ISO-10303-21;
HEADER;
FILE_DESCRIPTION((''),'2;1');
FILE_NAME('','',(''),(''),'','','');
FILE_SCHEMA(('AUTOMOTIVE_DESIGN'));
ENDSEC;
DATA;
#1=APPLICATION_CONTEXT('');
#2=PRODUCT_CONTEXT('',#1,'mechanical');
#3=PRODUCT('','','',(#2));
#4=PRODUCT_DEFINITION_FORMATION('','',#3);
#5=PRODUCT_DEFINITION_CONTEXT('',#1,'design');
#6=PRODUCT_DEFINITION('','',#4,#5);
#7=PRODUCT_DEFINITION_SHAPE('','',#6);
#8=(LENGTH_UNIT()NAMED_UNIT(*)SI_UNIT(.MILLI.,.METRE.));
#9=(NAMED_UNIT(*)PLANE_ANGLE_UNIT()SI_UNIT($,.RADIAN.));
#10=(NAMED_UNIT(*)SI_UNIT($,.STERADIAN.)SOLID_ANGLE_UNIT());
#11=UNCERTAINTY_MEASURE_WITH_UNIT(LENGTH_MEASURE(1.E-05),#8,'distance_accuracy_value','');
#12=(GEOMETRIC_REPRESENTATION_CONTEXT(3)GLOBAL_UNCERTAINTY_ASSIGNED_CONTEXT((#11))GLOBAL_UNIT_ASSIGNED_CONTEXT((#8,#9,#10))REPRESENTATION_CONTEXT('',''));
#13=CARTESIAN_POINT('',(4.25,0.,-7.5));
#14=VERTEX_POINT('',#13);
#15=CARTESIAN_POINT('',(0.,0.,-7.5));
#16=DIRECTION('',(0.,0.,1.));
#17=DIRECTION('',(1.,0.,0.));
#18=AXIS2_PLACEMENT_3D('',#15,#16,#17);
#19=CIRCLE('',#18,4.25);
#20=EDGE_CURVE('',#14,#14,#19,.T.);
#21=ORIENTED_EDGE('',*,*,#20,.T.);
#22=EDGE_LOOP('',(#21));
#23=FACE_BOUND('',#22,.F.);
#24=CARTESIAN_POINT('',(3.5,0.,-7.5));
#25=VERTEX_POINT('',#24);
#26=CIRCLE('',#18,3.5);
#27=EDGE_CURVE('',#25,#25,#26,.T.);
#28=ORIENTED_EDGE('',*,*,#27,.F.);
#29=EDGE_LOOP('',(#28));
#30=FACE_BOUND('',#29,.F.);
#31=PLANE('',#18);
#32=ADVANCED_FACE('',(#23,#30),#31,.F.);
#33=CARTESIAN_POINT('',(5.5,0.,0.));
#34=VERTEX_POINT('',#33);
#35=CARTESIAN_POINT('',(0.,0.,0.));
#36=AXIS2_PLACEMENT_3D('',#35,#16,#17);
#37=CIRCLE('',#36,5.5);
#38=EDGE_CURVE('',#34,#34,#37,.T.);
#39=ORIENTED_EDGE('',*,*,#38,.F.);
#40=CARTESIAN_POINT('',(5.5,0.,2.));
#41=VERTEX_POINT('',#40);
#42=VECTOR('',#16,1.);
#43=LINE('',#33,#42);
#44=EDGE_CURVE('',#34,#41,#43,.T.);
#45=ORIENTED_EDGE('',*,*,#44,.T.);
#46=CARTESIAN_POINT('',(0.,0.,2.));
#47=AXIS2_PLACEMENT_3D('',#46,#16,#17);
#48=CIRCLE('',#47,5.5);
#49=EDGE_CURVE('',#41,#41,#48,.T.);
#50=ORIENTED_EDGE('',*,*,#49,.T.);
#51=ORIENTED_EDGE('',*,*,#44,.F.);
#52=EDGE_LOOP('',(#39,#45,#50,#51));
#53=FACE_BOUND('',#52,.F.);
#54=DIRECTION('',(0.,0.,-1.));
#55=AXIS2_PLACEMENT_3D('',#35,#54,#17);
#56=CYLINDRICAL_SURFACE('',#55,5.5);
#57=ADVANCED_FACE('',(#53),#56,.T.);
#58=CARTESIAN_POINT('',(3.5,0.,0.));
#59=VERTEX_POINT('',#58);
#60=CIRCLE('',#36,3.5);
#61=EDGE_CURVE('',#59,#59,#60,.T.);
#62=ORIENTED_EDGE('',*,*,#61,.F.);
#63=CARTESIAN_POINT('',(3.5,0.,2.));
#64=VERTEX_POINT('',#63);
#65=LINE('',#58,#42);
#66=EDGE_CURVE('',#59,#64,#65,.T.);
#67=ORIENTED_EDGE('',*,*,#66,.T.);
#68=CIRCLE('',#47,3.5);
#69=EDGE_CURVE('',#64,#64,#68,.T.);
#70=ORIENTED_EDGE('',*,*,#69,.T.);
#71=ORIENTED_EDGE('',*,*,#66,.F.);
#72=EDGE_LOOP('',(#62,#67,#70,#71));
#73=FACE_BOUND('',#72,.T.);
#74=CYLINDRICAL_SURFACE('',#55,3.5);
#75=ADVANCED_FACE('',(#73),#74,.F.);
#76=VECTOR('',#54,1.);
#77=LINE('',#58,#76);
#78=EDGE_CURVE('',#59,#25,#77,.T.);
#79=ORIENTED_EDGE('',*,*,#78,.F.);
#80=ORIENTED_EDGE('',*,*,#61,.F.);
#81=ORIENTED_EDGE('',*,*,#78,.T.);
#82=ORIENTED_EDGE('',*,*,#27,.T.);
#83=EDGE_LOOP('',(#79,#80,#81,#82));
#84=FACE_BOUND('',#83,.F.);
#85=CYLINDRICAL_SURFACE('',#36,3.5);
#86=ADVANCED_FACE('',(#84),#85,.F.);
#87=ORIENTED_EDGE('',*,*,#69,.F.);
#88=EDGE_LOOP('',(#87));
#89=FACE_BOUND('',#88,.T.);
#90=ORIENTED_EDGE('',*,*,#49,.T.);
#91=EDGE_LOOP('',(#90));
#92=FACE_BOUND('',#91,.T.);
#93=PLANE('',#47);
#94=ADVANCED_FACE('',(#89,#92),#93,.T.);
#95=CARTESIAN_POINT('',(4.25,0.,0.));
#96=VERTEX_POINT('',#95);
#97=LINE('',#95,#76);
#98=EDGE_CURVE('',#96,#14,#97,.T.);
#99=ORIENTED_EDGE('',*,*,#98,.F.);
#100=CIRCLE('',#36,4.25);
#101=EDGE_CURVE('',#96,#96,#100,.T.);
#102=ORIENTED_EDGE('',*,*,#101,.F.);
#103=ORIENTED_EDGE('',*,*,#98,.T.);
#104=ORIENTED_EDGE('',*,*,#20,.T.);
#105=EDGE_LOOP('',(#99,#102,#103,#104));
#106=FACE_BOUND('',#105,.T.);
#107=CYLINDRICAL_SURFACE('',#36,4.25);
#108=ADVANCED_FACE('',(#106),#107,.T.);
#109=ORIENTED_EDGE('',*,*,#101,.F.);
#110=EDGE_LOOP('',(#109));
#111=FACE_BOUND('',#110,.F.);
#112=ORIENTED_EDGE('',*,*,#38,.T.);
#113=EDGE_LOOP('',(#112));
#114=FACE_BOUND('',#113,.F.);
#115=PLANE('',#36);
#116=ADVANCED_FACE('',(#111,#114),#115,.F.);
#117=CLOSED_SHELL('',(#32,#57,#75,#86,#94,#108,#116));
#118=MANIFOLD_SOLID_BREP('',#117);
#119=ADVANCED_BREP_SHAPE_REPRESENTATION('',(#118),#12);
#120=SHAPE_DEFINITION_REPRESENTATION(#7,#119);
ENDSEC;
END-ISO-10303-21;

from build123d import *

# Parameters (mm, degrees)
F0_R     = 5.5
F0_R_2   = 4.25
F0_R_3   = 3.5
F1_DEPTH = 2
F2_DEPTH = 7.5


# Not quite as in the source:
# - a feature names something its author has since deleted; it is built from what else it names


with BuildPart() as f1:
    # F0 (on Top) → F1 (new body)
    with BuildSketch(Plane.XY):
        Circle(F0_R)
        Circle(F0_R_2, mode=Mode.SUBTRACT)
        Circle(F0_R_2)
        Circle(F0_R_3, mode=Mode.SUBTRACT)
    extrude(amount=F1_DEPTH)

    # F0 (on Top) → F2 (join)
    with BuildSketch(Plane.XY):
        Circle(F0_R_2)
        Circle(F0_R_3, mode=Mode.SUBTRACT)
    extrude(amount=-F2_DEPTH)


solid = f1.part
